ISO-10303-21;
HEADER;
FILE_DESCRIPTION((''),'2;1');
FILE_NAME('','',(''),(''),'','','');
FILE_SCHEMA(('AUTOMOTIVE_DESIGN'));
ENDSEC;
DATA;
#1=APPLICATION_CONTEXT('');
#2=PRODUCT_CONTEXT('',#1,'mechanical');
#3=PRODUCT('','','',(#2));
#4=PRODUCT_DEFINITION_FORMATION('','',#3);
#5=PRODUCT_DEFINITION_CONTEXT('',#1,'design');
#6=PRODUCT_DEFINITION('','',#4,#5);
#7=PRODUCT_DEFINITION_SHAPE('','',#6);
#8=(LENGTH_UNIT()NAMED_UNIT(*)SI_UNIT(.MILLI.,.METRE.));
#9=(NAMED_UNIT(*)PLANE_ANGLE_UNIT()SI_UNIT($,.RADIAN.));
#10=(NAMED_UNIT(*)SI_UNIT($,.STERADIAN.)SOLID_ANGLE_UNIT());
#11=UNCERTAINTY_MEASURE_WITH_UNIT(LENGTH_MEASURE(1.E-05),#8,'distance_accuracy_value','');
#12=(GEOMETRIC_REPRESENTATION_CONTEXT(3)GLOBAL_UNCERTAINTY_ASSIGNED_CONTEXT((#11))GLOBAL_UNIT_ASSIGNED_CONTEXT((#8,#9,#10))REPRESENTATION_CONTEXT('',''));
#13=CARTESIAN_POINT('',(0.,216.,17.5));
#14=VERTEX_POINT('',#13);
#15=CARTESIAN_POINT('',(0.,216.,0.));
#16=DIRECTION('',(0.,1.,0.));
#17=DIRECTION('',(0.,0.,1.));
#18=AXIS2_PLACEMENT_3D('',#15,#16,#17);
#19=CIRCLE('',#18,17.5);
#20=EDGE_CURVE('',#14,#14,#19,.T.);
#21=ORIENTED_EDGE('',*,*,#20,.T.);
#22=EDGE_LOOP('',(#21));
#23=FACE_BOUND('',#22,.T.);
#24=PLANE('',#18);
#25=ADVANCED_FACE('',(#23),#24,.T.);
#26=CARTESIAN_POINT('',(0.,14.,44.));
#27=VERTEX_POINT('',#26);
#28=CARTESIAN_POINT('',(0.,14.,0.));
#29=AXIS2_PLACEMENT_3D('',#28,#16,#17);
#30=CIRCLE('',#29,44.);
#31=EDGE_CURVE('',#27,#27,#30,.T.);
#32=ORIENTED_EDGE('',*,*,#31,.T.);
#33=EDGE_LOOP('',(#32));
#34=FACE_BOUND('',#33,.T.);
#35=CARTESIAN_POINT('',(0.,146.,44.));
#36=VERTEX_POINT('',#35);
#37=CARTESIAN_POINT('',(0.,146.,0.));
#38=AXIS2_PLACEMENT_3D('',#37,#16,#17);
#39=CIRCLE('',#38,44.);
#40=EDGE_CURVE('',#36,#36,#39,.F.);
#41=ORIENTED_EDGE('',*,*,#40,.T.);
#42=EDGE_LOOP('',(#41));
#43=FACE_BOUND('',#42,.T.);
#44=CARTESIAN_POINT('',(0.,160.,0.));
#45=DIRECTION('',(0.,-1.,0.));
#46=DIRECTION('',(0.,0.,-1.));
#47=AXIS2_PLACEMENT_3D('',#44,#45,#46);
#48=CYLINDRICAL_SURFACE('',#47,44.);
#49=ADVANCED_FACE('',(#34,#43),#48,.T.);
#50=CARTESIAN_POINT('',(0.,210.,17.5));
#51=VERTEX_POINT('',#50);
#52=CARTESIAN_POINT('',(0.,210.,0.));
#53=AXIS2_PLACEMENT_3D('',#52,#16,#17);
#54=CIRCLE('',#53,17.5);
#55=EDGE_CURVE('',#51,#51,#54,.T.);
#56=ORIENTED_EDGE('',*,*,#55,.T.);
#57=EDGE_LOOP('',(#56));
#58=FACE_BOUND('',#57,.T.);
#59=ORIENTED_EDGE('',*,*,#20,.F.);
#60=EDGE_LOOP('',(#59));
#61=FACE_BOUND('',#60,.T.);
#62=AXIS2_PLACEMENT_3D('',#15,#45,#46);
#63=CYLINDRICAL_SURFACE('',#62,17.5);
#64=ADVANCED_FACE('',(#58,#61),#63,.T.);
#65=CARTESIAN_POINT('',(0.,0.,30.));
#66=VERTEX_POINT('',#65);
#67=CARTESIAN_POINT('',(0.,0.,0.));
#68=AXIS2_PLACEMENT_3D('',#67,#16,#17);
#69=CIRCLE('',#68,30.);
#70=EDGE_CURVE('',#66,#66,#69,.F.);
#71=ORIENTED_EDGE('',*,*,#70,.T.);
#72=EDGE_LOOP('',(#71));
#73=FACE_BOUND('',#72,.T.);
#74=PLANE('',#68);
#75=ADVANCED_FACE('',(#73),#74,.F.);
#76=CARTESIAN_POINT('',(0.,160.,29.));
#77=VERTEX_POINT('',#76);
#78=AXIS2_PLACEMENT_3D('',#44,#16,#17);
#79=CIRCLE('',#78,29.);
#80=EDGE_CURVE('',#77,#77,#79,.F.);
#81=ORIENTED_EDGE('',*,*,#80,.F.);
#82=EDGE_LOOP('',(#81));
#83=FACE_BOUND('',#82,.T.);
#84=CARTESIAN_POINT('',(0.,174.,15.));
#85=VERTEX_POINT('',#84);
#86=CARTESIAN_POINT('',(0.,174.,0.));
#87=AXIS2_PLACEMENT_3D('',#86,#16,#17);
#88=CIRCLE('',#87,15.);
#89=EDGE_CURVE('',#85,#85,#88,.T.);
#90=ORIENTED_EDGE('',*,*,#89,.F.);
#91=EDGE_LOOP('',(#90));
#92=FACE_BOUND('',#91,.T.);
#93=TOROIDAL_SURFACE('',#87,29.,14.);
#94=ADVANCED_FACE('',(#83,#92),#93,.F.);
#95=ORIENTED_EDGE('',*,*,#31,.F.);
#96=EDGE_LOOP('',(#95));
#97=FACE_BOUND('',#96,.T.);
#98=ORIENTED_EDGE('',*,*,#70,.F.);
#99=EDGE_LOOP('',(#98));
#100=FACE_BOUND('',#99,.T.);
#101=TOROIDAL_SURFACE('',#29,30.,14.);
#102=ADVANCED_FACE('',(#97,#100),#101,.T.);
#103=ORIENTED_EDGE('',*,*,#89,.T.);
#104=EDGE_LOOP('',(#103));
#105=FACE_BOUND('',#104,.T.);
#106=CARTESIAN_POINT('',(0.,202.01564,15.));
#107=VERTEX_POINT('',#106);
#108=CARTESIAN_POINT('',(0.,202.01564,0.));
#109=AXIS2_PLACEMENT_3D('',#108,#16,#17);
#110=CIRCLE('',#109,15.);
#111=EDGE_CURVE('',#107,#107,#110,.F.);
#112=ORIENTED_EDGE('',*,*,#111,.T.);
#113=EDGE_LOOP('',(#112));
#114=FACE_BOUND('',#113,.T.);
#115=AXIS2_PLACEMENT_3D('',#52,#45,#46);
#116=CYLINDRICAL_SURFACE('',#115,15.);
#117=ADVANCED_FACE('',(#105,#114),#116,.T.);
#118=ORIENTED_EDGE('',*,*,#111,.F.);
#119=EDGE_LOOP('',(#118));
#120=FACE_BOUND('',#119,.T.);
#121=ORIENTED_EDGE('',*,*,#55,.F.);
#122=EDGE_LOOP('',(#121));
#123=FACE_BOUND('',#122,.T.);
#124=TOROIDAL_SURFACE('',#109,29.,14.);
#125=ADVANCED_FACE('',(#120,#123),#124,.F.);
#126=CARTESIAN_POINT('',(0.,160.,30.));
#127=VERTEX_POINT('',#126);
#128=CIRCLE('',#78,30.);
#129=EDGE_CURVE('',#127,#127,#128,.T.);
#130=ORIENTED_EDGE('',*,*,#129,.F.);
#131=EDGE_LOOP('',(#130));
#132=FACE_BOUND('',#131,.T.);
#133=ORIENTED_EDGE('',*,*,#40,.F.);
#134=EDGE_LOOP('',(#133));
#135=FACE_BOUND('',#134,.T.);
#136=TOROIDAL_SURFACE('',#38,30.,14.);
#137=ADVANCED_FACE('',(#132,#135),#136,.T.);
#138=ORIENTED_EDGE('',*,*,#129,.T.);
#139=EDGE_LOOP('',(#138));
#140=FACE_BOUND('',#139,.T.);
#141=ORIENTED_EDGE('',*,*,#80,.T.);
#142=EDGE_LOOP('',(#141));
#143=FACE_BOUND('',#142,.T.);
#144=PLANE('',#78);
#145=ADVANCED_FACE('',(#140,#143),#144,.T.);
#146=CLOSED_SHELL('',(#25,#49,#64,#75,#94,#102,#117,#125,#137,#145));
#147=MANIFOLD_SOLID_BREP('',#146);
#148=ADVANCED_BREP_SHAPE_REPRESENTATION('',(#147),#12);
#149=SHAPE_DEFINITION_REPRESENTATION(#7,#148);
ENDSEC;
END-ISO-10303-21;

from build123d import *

# Parameters (mm, degrees)
ESQUISSE1_R        = 44
BOSS_EXTRU_1_DEPTH = 160
ESQUISSE2_R        = 15
BOSS_EXTRU_2_DEPTH = 50
ESQUISSE3_R        = 17.5
BOSS_EXTRU_3_DEPTH = 6
CONG_1_R           = 14
CONG_2_R           = 14
CONG_3_R           = 14


with BuildPart() as part:
    # Esquisse1 → Boss.-Extru.1 (new body)
    with BuildSketch(Plane(origin=(0, 0, 0), x_dir=(1, 0, 0), z_dir=(0, 1, 0))):
        with Locations(Location((0, 0, 0), (0, 0, 270))):
            Circle(ESQUISSE1_R)
    extrude(amount=BOSS_EXTRU_1_DEPTH)

    # Esquisse2 → Boss.-Extru.2 (add)
    with BuildSketch(Plane(origin=(0, 160, 0), x_dir=(1, 0, 0), z_dir=(0, 1, 0))):
        with Locations(Location((0, 0, 0), (0, 0, 270))):
            Circle(ESQUISSE2_R)
    extrude(amount=BOSS_EXTRU_2_DEPTH)

    # Esquisse3 → Boss.-Extru.3 (add)
    with BuildSketch(Plane(origin=(0, 210, 0), x_dir=(1, 0, 0), z_dir=(0, 1, 0))):
        with Locations(Location((0, 0, 0), (0, 0, 270))):
            Circle(ESQUISSE3_R)
    extrude(amount=BOSS_EXTRU_3_DEPTH)

    # Congé1
    cong_1_edges = [part.edges().sort_by_distance(p)[0] for p in [
        (0, 160, -44),
        (0, 160, -15),
    ]]
    fillet(cong_1_edges, radius=CONG_1_R)

    # Congé2
    # the kernel refuses this fillet: 14 mm, written as the material it adds along each edge
    with BuildSketch(Plane(origin=(0, 210, 0), x_dir=(0, 0, 1), z_dir=(-1, 0, 0))) as cong_2_piece_1:
        with BuildLine():
            CenterArc((29, -7.984359711), CONG_2_R, 145.228055968, 34.771944032)
            Line((17.5, 0), (17.27, 0.159687194))
            ThreePointArc((17.27, 0.159687194), (16.25, 0.28), (15, 0.28))
            Line((15, 0.28), (14.72, 0))
            Line((14.72, 0), (14.72, -7.984359711))
            Line((14.72, -7.984359711), (15, -7.984359711))
        make_face()
    revolve(axis=Axis((0, 210, 0), (0, 1, 0)))

    # Congé3
    cong_3_edges = [part.edges().sort_by_distance(p)[0] for p in [
        (0, 0, -44),
    ]]
    fillet(cong_3_edges, radius=CONG_3_R)


solid = part.part
